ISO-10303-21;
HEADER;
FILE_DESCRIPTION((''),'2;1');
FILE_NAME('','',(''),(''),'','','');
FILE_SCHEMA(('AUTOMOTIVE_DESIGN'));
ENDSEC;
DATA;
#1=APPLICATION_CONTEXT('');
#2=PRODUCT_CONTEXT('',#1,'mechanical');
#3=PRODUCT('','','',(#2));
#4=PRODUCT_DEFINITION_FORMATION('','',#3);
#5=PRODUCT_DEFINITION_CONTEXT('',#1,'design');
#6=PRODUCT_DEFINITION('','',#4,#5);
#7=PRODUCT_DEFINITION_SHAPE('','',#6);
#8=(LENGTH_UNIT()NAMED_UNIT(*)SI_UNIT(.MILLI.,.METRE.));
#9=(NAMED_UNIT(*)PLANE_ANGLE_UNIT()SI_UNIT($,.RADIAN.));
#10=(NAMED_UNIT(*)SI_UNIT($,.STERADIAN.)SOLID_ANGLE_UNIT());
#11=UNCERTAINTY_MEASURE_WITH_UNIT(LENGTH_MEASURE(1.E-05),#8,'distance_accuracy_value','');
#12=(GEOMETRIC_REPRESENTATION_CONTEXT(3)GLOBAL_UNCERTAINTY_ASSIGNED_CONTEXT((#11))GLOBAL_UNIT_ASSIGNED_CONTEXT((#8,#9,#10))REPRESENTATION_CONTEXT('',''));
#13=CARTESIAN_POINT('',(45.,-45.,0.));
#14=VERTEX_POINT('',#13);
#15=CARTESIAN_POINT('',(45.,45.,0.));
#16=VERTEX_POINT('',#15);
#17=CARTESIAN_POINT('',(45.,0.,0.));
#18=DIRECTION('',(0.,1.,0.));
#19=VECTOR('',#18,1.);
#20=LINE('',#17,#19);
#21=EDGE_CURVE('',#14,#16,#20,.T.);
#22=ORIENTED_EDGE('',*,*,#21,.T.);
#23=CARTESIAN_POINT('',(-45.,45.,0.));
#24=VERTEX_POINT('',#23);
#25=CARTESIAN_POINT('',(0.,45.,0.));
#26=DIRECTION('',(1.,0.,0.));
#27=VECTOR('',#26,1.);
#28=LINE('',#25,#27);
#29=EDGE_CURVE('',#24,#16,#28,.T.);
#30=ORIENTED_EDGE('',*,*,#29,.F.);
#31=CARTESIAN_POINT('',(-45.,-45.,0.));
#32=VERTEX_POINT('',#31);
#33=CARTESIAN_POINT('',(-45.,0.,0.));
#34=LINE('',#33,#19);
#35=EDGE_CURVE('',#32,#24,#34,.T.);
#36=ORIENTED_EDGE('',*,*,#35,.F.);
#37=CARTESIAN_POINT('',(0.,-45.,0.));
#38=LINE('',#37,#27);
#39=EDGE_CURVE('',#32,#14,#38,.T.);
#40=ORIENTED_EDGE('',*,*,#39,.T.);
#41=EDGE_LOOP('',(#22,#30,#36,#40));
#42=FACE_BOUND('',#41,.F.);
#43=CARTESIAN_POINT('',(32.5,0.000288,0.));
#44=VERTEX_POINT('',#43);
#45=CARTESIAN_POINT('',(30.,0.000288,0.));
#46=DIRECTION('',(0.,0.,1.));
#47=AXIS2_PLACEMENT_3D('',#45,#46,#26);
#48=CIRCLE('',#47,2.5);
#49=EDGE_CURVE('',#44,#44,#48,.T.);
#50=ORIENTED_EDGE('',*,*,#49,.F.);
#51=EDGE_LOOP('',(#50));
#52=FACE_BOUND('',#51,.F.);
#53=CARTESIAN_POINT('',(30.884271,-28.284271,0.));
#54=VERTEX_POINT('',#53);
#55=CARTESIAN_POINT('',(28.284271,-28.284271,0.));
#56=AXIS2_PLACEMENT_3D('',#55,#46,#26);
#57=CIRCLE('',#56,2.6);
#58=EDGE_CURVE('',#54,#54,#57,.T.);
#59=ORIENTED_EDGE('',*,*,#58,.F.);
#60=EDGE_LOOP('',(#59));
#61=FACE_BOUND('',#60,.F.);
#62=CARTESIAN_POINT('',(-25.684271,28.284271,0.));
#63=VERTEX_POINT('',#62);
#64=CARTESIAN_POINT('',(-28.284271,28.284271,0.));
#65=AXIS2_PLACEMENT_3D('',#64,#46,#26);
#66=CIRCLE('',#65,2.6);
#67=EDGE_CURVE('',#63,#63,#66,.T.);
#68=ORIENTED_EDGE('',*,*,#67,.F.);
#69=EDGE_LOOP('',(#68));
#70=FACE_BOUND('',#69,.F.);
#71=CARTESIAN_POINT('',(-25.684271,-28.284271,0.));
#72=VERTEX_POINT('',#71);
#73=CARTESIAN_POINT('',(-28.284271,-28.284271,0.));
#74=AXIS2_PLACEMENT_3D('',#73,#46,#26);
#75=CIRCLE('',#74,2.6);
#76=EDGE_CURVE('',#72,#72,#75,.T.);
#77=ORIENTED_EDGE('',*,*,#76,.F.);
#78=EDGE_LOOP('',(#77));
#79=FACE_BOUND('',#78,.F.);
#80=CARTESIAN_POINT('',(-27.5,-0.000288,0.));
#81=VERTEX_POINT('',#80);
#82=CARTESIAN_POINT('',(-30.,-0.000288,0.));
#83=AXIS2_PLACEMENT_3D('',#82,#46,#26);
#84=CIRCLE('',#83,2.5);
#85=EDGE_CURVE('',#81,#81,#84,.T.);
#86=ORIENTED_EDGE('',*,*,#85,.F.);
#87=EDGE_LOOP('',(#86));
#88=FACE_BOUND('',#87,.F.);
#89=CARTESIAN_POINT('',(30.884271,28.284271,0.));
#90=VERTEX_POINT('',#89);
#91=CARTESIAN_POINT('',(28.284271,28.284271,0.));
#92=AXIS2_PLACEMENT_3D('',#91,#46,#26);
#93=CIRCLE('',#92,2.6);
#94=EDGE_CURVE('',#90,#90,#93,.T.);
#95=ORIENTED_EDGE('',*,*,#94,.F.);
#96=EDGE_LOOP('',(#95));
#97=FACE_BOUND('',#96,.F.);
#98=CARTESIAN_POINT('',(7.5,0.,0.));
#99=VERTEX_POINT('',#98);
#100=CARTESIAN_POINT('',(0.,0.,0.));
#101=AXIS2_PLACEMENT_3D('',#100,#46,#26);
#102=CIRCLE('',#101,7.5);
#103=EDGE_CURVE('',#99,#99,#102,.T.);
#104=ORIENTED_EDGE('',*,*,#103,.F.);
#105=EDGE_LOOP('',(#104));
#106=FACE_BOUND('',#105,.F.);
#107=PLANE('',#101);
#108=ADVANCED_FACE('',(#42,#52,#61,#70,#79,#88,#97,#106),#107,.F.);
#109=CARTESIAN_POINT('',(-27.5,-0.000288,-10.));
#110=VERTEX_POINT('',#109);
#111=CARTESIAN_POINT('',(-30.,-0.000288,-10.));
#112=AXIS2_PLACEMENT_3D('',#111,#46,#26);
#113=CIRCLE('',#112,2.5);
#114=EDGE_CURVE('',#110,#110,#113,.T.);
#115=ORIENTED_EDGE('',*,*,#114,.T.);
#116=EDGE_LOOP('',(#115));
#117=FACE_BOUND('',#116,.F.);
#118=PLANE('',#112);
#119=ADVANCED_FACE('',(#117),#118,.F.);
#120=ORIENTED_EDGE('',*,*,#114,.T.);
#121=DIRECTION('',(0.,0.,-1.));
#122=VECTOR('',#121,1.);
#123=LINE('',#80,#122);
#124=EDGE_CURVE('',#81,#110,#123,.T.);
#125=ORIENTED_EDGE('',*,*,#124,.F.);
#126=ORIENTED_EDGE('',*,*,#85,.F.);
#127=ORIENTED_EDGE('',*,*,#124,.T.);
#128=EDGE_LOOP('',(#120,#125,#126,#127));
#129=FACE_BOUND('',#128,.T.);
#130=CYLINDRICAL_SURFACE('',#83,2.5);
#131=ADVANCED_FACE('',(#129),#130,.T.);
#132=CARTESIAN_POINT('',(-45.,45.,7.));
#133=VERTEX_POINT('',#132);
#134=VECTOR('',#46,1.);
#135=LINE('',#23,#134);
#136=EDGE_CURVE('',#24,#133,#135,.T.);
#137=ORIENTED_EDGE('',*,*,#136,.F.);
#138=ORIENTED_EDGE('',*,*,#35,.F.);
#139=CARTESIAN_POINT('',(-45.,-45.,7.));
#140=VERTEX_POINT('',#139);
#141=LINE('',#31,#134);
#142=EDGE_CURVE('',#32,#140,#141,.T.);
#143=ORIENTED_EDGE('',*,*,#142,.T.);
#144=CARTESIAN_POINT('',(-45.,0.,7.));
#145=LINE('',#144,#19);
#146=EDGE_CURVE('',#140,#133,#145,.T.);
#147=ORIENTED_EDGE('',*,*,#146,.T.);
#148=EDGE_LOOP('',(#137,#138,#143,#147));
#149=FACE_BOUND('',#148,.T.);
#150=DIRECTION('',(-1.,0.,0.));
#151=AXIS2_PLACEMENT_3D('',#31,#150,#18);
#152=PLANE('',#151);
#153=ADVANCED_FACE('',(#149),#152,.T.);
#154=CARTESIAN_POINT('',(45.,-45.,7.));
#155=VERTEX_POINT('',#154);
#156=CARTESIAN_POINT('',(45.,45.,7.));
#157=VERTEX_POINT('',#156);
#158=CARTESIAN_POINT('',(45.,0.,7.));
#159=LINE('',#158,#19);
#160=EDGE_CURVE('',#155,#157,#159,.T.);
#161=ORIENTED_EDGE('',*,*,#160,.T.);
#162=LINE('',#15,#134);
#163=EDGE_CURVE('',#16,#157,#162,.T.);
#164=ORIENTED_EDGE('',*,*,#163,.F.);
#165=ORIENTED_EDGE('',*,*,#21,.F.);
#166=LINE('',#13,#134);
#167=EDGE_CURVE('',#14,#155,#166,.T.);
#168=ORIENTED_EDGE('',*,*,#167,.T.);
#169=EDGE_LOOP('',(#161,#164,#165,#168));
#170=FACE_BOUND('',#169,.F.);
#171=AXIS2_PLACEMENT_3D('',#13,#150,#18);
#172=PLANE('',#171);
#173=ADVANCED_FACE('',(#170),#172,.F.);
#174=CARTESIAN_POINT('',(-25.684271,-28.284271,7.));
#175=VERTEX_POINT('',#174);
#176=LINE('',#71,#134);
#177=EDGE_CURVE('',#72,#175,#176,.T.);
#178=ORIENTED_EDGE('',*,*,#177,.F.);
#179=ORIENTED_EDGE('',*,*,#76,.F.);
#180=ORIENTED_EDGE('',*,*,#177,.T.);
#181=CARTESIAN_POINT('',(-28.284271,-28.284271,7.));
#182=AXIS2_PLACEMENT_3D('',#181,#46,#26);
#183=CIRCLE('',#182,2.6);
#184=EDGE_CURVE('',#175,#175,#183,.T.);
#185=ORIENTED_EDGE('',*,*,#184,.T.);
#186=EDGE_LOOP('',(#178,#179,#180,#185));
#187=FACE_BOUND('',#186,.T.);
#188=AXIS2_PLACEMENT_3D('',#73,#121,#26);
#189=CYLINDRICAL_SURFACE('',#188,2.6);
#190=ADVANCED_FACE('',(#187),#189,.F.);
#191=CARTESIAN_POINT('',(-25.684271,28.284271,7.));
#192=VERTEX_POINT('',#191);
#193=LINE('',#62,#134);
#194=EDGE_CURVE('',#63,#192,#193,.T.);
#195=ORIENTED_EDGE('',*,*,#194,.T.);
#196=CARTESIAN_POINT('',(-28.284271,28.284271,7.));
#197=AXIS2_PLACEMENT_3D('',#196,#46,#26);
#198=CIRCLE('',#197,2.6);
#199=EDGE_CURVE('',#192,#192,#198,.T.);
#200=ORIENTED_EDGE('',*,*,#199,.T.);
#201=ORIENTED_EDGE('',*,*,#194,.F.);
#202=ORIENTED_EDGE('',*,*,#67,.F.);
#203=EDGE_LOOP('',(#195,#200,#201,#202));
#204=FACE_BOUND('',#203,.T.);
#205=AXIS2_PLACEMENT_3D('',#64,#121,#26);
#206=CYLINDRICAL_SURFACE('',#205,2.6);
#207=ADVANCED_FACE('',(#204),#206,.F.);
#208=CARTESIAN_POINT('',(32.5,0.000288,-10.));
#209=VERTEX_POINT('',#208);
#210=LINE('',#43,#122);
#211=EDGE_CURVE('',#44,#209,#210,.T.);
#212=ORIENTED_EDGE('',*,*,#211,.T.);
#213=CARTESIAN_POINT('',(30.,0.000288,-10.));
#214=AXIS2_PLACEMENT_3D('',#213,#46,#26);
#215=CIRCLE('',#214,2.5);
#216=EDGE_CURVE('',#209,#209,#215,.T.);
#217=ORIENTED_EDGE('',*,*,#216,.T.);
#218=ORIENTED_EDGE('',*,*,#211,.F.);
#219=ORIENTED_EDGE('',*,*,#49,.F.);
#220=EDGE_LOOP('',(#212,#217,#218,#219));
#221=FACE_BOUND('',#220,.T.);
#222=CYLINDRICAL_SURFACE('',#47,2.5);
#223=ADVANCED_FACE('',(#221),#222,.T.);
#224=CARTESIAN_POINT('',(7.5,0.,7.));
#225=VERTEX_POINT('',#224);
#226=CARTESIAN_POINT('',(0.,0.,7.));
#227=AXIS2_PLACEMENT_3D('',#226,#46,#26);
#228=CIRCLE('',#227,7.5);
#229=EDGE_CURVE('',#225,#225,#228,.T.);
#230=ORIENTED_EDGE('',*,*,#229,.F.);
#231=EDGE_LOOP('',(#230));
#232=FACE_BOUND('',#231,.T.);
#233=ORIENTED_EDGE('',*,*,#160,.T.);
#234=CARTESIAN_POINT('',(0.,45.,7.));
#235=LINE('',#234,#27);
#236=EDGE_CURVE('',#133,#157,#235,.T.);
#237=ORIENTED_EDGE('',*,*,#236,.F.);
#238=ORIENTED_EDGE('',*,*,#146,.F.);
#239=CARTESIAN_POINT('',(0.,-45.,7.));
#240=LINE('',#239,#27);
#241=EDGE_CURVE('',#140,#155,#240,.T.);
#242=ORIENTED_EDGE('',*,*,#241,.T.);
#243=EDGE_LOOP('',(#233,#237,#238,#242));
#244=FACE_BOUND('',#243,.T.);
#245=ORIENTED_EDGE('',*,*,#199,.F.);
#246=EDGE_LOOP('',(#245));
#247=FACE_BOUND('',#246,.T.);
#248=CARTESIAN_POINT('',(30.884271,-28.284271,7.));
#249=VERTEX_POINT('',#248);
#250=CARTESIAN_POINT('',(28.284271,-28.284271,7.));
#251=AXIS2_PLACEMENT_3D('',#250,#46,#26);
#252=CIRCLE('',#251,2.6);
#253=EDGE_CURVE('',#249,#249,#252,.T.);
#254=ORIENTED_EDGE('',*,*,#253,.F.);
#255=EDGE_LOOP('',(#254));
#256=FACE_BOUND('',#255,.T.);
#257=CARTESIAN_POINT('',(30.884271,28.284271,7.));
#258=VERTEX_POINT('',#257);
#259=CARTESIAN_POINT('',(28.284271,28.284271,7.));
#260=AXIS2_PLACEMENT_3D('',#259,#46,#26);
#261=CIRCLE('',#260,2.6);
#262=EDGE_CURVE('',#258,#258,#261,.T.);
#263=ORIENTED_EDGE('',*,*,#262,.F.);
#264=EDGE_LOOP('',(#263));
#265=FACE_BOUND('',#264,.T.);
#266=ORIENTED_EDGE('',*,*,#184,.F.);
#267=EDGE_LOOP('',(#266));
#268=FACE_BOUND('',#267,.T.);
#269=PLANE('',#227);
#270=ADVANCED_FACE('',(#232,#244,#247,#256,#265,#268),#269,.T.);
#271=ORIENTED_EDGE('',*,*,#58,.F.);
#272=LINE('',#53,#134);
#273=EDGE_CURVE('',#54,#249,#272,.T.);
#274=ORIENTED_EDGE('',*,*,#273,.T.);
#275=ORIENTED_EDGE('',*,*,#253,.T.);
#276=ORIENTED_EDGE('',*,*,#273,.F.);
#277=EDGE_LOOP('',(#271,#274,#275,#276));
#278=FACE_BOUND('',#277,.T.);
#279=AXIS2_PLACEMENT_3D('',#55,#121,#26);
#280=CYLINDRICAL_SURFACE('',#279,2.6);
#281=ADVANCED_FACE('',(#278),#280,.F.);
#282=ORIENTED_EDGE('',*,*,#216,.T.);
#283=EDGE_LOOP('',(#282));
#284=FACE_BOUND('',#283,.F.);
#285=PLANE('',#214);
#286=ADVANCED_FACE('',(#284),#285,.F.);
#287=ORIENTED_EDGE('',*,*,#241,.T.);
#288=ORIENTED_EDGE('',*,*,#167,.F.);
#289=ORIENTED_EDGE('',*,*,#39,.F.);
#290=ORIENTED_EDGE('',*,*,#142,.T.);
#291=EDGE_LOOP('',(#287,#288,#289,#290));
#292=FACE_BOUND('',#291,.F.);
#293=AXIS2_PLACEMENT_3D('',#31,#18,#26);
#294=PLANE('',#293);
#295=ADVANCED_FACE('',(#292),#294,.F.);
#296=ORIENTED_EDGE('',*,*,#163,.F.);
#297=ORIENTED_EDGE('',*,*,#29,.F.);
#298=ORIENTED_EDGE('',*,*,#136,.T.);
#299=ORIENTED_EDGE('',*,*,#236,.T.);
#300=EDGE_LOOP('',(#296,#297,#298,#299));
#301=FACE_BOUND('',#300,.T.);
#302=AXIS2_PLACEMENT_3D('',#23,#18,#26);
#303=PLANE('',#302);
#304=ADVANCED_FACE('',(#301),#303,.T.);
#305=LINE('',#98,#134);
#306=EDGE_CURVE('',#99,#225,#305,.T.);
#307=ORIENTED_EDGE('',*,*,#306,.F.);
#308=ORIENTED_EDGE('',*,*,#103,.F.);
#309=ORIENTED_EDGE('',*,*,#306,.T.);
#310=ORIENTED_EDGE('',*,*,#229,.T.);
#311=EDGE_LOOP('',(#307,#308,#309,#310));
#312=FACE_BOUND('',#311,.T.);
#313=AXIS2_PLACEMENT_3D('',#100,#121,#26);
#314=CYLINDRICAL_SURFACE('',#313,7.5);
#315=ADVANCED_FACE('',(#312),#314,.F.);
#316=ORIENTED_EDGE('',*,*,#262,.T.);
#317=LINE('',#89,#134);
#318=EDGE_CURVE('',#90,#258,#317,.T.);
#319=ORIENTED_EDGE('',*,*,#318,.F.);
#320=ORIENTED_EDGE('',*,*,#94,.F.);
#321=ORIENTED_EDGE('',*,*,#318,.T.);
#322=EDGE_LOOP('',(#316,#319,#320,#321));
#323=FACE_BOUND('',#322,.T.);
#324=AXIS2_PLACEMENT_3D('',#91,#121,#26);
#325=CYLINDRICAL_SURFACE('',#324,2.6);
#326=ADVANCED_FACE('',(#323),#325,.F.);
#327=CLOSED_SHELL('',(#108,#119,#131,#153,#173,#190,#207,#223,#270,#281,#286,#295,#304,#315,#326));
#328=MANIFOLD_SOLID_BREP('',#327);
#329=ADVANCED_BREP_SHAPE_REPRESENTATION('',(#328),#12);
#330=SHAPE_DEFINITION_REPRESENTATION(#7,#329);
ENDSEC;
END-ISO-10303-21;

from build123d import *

# Parameters (mm, degrees)
F0_W     = 90
F0_H     = 90
F0_R     = 2.6
F0_R_2   = 2.5
F0_R_3   = 7.5
F1_DEPTH = 7
F2_DEPTH = 10


# Not quite as in the source:
# - a feature names something its author has since deleted; it is built from what else it names


with BuildPart() as f1:
    # F0 (on Top) → F1 (new body)
    with BuildSketch(Plane.XY):
        Rectangle(F0_W, F0_H)
        with Locations((-28.2842712475, -28.2842712475)):
            Circle(F0_R, mode=Mode.SUBTRACT)
        with Locations((-29.9999999986, -0.0002877)):
            Circle(F0_R_2, mode=Mode.SUBTRACT)
        with Locations((28.2842712475, -28.2842712475)):
            Circle(F0_R, mode=Mode.SUBTRACT)
        with Locations((-28.2842712475, 28.2842712475)):
            Circle(F0_R, mode=Mode.SUBTRACT)
        Circle(F0_R_3, mode=Mode.SUBTRACT)
        with Locations((29.9999999986, 0.0002877)):
            Circle(F0_R_2, mode=Mode.SUBTRACT)
        with Locations((28.2842712475, 28.2842712475)):
            Circle(F0_R, mode=Mode.SUBTRACT)
        with Locations((-29.9999999986, -0.0002877)):
            Circle(F0_R_2)
        with Locations((29.9999999986, 0.0002877)):
            Circle(F0_R_2)
    extrude(amount=F1_DEPTH)

    # F0 (on Top) → F2 (join)
    with BuildSketch(Plane.XY):
        with Locations((29.9999999986, 0.0002877)):
            Circle(F0_R_2)
        with Locations((-29.9999999986, -0.0002877)):
            Circle(F0_R_2)
    extrude(amount=-F2_DEPTH)


solid = f1.part
